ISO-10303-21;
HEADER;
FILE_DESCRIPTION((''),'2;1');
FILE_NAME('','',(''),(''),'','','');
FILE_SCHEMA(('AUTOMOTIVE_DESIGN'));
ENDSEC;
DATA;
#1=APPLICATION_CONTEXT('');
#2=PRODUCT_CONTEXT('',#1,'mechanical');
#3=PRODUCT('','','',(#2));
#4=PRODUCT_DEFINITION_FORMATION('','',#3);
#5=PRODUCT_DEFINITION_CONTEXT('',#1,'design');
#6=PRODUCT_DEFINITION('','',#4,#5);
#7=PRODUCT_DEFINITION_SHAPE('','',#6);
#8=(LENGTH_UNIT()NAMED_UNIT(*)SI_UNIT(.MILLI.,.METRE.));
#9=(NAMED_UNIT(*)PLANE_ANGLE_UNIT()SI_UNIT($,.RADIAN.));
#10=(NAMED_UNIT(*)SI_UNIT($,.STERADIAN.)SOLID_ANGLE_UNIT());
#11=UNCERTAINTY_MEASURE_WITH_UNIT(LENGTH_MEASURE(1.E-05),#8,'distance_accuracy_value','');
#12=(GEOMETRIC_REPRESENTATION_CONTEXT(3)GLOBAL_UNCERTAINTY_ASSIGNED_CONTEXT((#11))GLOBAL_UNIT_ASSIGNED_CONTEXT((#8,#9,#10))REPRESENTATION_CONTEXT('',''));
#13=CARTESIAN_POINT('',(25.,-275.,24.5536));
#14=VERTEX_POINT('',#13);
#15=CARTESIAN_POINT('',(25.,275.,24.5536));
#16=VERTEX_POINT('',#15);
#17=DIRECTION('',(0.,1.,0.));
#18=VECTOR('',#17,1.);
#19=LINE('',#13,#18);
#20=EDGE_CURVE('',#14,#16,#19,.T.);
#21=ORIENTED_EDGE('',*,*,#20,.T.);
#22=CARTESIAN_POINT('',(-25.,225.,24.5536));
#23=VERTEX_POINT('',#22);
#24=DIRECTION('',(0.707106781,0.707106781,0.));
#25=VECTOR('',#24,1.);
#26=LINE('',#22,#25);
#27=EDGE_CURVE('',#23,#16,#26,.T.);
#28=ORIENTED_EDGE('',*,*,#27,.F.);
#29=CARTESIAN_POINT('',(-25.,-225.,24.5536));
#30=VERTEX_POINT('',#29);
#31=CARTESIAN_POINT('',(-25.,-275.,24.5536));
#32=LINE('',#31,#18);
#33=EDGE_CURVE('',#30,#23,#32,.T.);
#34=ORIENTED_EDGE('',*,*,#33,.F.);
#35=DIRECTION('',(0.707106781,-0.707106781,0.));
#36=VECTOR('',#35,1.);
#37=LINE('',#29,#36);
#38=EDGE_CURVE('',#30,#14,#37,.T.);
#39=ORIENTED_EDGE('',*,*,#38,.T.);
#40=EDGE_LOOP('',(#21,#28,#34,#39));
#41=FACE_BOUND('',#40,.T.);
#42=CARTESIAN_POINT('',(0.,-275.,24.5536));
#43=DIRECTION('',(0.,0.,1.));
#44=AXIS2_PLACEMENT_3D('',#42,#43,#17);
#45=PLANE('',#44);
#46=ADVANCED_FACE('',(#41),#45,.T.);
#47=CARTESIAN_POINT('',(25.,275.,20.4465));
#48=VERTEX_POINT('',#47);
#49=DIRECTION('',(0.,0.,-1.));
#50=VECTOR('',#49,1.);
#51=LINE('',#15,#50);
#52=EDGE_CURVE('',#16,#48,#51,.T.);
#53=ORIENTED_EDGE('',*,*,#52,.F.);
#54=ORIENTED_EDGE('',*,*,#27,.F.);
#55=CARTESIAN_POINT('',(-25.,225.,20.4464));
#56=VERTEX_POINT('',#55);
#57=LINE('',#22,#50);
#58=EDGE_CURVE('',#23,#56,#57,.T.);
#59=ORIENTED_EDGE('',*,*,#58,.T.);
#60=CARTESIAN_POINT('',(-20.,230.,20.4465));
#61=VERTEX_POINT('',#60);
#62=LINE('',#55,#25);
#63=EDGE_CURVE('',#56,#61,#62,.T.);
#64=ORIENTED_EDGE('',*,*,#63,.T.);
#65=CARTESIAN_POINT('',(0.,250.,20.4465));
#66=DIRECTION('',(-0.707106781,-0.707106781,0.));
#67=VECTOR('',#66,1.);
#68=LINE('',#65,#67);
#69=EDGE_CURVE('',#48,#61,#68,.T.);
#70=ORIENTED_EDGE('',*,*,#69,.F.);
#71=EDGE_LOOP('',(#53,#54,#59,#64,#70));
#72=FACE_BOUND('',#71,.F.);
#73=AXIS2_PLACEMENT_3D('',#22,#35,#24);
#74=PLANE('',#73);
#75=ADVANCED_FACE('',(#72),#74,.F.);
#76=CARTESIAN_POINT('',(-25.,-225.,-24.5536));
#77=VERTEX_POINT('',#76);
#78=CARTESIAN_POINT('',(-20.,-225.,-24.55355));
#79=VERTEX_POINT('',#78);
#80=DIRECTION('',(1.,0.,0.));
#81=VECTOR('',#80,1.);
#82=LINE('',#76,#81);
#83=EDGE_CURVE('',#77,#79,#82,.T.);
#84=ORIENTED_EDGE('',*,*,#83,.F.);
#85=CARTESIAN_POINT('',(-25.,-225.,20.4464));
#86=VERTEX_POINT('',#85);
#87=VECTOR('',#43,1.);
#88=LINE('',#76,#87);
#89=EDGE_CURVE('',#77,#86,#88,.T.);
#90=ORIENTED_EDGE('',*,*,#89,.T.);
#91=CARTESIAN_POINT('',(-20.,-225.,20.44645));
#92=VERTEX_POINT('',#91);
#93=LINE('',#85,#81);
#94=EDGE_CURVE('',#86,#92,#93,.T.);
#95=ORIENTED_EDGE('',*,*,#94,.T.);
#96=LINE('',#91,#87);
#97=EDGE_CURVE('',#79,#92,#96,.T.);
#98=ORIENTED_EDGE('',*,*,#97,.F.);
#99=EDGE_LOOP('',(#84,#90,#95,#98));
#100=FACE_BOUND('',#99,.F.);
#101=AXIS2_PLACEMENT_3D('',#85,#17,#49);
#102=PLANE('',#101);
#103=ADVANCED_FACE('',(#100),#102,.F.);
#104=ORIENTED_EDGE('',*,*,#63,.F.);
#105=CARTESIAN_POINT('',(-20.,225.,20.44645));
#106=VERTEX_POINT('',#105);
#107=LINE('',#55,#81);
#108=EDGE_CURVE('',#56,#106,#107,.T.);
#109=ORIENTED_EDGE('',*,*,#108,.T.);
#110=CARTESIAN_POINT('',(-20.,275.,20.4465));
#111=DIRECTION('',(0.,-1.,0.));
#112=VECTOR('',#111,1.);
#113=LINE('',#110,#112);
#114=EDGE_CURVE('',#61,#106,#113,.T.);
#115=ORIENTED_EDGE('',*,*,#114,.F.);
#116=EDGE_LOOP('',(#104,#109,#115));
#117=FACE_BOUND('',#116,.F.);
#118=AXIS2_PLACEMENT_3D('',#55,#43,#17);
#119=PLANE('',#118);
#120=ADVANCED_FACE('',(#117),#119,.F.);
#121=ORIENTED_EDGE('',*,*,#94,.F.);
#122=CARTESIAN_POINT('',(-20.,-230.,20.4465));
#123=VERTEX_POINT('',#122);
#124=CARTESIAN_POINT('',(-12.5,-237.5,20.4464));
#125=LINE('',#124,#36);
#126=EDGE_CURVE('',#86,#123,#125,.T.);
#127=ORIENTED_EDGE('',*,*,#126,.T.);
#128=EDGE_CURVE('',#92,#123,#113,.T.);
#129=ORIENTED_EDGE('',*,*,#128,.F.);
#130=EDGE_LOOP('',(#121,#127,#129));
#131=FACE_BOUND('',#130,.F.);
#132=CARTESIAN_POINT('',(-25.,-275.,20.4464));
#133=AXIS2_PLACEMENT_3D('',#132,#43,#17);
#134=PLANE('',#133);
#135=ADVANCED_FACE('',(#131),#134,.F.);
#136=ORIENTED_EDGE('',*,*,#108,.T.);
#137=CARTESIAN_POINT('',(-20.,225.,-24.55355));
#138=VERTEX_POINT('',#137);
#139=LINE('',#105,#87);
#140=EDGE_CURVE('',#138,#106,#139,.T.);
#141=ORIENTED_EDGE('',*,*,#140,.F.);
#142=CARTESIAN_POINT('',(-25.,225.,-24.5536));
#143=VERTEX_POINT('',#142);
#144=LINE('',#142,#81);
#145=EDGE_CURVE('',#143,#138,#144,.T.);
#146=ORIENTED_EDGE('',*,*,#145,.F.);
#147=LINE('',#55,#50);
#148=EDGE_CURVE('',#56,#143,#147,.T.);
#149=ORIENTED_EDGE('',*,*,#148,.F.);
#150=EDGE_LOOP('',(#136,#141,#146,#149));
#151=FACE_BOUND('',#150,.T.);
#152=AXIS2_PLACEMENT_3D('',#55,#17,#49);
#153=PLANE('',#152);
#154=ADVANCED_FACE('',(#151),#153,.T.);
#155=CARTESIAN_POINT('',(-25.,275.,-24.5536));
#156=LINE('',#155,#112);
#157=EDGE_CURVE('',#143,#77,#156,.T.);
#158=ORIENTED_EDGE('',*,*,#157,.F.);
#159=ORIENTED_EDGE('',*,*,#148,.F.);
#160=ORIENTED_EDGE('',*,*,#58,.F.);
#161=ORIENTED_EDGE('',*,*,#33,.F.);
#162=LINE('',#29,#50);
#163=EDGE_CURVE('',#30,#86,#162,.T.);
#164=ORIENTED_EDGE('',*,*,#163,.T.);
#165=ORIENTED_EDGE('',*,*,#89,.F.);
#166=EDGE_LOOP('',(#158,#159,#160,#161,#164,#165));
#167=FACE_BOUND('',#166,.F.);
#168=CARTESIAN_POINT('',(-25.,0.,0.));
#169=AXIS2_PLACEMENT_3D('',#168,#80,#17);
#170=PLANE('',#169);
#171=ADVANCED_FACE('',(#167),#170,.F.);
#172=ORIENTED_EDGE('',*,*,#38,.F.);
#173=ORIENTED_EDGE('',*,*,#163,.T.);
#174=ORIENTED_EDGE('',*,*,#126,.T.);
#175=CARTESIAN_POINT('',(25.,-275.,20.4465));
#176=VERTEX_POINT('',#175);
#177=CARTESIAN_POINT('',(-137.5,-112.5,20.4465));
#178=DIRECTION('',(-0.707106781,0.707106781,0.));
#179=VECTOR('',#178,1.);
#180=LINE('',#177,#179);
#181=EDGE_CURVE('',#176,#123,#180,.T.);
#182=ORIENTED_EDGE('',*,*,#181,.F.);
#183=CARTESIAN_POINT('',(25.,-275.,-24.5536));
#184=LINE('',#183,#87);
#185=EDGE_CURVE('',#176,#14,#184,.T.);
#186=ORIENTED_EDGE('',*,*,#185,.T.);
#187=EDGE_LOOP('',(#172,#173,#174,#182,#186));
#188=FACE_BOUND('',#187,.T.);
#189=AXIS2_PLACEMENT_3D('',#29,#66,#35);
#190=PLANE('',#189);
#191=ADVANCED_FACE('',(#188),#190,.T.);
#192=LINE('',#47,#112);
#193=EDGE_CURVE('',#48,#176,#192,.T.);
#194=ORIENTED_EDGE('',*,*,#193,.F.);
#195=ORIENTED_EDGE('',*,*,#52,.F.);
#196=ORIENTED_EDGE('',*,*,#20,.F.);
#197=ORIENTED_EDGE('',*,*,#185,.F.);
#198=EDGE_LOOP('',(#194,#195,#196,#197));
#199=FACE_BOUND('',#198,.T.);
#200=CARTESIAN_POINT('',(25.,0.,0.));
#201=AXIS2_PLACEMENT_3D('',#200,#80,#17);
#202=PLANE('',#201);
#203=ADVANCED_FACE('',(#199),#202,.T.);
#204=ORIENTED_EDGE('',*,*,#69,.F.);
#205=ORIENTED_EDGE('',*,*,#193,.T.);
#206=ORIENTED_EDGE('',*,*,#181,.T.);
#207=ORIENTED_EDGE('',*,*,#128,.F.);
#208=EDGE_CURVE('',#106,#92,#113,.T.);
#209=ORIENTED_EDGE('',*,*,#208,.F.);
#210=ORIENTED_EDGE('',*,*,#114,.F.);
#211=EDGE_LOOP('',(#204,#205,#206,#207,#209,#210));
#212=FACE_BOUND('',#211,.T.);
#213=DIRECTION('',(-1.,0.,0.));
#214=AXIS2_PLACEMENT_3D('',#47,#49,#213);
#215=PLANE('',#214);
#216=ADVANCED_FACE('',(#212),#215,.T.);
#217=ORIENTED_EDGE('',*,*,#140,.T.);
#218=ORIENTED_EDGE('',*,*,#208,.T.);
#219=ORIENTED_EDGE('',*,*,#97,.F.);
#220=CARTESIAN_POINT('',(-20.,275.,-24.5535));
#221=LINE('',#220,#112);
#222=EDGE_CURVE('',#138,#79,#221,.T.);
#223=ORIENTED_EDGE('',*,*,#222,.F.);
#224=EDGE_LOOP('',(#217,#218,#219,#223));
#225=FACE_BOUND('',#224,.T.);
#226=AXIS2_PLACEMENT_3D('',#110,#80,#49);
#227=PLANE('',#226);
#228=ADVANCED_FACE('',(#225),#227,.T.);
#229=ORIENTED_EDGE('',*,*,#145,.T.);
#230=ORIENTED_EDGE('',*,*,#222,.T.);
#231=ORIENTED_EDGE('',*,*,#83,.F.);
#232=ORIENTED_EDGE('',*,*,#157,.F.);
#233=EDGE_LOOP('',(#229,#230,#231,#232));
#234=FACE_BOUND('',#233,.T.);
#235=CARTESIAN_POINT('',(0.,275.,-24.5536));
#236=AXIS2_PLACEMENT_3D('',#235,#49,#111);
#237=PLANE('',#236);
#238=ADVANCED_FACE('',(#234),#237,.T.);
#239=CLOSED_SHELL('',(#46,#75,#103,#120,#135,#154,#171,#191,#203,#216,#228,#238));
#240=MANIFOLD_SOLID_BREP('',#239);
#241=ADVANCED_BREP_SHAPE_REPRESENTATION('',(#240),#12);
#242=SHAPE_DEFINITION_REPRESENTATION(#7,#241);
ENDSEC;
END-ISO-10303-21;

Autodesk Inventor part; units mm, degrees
ref_plane "YZ Plane" through (0, 0, 0) normal (1, 0, 0) x (0, 1, 0)
ref_plane "XZ Plane" through (0, 0, 0) normal (0, 1, 0) x (-1, 0, 0)
ref_plane "XY Plane" through (0, 0, 0) normal (0, 0, 1) x (1, 0, 0)
sketch "Sketch1" plane through (0, 0, 0) normal (1, 0, 0) x (0, 1, 0)
  line L0 (-275, 24.5536) -> (275, 24.5536)
  line L1 (275, 24.5536) -> (275, -24.5536)
  line L2 (275, -24.5536) -> (-275, -24.5536)
  line L3 (-275, -24.5536) -> (-275, 24.5536)
  point P0 (0, 0)
  dimension "d15" = 550
extrude "Extrusion1" add sketch "Sketch1" along normal mid plane 50
sketch "Sketch2" plane through (-25, 275, 24.5536) normal (0, 1, 0) x (1, 0, 0)
  line L0 (50, 49.1071) -> (50, 0) projected
  line L1 (50, 4.1071) -> (5, 4.1071)
  line L2 (5, 4.1071) -> (5, 49.1071)
  line L3 (50, 49.1071) -> (0, 49.1071) projected
  line L4 (5, 49.1071) -> (50, 49.1071)
  line L5 (50, 49.1071) -> (50, 4.1071)
  point P0 (25, 24.5536)
extrude "Extrusion2" cut sketch "Sketch2" against normal through all
sketch "Sketch5" plane through (-25, 0, 0) normal (-1, 0, 0) x (0, 0, 1)
  line L0 (-24.5536, 275) -> (-24.5536, -275) projected
  line L1 (20.4464, -275) -> (20.4464, 275) projected
  line L2 (-24.5536, 275) -> (20.4464, 275)
  line L3 (20.4464, 275) -> (20.4464, 225)
  line L4 (20.4464, 225) -> (-24.5536, 225)
  line L5 (-24.5536, 225) -> (-24.5536, 275)
  line L6 (-24.5536, -275) -> (24.5536, -275) projected
  line L7 (-24.5536, -275) -> (20.4464, -275)
  line L8 (20.4464, -275) -> (20.4464, -225)
  line L9 (20.4464, -225) -> (-24.5536, -225)
  line L10 (-24.5536, -225) -> (-24.5536, -275)
  point P0 (0, 0)
extrude "Extrusion5" cut sketch "Sketch5" against normal blind 10 contours L2 L1 L4 L0 | L9 L1 L6 L0
sketch "Sketch6" plane through (-25, -275, 24.5536) normal (0, 0, 1) x (1, 0, 0)
  line L0 (0, 500) -> (0, 50) projected
  line L1 (50, 0) -> (50, 550) projected
  line L2 (0, 500) -> (50, 550)
  line L3 (50, 550) -> (0, 550)
  line L4 (0, 550) -> (0, 500)
  line L5 (0, 50) -> (50, 0)
  line L6 (0, 0) -> (50, 0) projected
  line L7 (50, 0) -> (0, 0)
  line L8 (0, 0) -> (0, 50)
  point P0 (25, 275)
extrude "Extrusion6" cut sketch "Sketch6" against normal blind 5 contours L4 L3 L2 | L5 L6 L8
properties part number "angle3"
